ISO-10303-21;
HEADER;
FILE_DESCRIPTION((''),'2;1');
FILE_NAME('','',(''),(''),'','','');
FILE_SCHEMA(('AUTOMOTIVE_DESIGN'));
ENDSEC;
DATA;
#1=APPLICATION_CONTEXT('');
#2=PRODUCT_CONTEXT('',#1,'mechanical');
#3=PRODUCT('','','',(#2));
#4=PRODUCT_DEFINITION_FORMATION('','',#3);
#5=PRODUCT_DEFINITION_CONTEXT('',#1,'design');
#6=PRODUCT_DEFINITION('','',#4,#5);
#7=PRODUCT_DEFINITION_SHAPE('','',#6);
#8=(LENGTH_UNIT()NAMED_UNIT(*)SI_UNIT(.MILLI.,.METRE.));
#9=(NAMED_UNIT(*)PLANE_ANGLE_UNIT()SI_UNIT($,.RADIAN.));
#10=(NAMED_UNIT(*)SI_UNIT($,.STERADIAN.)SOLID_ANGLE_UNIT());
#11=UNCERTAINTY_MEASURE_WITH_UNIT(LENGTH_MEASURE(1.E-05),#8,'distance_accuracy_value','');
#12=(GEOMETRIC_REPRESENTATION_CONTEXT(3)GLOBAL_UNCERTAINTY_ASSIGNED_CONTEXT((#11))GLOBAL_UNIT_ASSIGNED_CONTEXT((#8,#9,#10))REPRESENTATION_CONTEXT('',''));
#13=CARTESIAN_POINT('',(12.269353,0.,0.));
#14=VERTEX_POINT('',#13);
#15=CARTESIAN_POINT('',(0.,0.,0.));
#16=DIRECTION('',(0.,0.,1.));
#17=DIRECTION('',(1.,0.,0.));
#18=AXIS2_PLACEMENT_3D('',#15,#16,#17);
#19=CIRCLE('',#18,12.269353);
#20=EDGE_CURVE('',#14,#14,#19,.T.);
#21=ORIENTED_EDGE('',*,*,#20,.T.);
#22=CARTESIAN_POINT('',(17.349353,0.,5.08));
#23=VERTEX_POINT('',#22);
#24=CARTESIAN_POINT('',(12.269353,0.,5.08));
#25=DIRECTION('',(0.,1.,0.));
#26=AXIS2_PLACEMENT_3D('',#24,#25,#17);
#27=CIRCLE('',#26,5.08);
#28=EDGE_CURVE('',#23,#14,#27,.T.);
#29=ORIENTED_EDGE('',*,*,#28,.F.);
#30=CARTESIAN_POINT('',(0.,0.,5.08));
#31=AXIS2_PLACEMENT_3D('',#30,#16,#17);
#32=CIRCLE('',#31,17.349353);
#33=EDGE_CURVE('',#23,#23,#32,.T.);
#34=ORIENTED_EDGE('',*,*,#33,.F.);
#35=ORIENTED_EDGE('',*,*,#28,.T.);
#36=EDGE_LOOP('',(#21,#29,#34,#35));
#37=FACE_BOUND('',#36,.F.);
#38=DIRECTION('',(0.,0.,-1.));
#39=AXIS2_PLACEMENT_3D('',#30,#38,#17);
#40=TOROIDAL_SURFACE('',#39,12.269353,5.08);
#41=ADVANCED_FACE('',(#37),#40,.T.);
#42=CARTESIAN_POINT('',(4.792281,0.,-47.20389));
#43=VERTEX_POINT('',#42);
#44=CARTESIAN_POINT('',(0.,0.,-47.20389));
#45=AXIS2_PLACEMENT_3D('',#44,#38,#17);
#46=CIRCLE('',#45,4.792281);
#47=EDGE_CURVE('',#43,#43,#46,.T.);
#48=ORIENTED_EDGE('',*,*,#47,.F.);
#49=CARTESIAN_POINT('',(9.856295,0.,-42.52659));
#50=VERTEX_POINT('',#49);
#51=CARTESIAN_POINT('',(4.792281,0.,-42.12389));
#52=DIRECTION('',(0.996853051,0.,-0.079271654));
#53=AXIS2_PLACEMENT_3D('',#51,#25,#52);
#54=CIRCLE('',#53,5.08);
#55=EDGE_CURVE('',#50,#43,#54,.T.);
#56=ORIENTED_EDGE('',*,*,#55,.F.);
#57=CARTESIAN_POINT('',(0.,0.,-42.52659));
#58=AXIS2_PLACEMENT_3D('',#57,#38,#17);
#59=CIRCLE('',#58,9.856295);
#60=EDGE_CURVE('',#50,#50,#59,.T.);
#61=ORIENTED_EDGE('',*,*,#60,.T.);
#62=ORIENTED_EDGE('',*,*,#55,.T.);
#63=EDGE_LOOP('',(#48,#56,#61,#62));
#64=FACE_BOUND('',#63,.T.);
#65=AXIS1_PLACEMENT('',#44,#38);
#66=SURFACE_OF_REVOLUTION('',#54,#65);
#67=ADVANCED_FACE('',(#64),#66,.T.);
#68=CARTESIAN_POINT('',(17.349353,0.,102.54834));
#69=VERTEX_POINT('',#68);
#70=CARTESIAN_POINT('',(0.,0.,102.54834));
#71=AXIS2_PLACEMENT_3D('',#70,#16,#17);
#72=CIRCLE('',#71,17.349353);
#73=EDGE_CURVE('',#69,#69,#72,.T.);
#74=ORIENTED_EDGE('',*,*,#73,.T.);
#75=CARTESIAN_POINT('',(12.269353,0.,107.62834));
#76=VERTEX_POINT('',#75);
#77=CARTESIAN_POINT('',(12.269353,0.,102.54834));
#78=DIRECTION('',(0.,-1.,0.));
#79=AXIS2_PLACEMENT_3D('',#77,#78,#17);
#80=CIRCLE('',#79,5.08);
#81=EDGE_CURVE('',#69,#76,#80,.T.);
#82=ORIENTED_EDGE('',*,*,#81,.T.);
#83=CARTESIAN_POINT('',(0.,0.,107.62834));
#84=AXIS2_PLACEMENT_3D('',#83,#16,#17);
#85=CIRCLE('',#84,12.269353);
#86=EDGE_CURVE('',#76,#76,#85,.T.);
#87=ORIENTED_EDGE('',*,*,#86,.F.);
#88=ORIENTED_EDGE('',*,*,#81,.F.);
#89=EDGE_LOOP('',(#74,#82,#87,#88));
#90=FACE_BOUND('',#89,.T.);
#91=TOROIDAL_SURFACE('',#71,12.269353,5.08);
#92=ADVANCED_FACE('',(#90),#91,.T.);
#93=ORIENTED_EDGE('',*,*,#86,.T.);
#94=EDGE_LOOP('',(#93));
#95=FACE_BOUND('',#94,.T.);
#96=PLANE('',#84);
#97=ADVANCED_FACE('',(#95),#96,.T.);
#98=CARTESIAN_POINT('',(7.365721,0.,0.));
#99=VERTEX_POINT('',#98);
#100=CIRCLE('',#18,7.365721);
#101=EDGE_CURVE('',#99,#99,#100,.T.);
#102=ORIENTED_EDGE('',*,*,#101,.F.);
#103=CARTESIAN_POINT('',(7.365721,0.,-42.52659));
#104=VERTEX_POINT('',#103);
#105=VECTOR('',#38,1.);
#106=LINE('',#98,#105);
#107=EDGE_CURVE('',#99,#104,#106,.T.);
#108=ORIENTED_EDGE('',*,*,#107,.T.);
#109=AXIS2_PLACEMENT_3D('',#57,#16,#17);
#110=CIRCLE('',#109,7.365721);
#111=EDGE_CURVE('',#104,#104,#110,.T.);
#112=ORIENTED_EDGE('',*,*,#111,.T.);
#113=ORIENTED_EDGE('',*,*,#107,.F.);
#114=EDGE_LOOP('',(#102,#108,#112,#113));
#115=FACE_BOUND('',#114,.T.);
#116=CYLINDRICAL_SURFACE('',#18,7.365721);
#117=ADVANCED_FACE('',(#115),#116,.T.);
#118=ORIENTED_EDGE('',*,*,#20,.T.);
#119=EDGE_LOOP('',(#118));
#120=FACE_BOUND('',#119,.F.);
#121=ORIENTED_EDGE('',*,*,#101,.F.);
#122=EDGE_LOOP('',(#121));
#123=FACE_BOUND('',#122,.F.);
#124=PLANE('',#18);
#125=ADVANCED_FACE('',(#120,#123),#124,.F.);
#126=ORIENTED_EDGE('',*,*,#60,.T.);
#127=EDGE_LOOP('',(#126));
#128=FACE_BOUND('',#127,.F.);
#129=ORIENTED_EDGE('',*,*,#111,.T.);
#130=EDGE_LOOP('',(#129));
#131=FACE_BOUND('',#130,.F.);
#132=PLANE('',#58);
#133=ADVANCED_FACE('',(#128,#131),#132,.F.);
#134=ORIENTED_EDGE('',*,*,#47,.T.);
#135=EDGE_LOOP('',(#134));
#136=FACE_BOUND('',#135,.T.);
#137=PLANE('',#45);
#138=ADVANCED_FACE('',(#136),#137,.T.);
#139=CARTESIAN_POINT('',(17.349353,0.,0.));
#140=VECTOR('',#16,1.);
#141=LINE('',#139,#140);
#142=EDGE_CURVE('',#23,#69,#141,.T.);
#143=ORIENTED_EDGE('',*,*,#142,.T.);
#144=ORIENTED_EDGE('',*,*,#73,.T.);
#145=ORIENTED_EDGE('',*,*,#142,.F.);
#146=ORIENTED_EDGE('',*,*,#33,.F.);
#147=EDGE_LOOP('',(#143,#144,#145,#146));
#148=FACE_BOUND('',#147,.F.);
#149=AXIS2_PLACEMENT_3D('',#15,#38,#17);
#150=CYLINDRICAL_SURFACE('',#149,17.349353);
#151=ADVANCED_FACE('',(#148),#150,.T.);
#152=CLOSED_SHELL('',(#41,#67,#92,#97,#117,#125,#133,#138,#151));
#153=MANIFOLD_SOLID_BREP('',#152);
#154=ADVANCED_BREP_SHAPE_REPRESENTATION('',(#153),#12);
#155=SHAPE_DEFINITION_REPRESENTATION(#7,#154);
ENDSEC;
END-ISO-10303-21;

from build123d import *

# Parameters (mm, degrees)
F0_R     = 17.3493533367
F1_DEPTH = 107.62834
F2_R     = 5.08
F3_R     = 5.08
F4_R     = 7.3657213081
F5_DEPTH = 42.52659
F6_R     = 9.8562945963
F7_DEPTH = 4.6773


# Not quite as in the source:
# - a fillet or chamfer that OpenCascade refuses, or shapes differently, is made with other operations: its cross-section is extruded or revolved along the edge and cut away or added


with BuildPart() as f1:
    # F0 (on Top) → F1 (new body)
    with BuildSketch(Plane.XY):
        Circle(F0_R)
    extrude(amount=F1_DEPTH)

    # F2
    f2_edges = [f1.edges().sort_by_distance(p)[0] for p in [
        (-17.349353, 0, 107.62834),
    ]]
    fillet(f2_edges, radius=F2_R)

    # F3
    f3_edges = [f1.edges().sort_by_distance(p)[0] for p in [
        (-17.349353, 0, 0),
    ]]
    fillet(f3_edges, radius=F3_R)

    # F4 (on Top) → F5 (join)
    with BuildSketch(Plane.XY):
        Circle(F4_R)
    extrude(amount=-F5_DEPTH)

    # F6 (on face) → F7 (join)
    with BuildSketch(Plane(origin=(0, 0, -42.52659), x_dir=(1, 0, 0), z_dir=(0, 0, -1))):
        Circle(F6_R)
    extrude(amount=F7_DEPTH)

    # F8: fillet of radius 5.08 on 1 edges, made by hand

    # F8_s1 → F8_t2 (revolve, cut)
    with BuildSketch(Plane.XZ):
        with BuildLine():
            ThreePointArc((9.8562945963, -42.52659), (8.2390682978, -45.8556533901), (4.7922810981, -47.20389))
            Line((4.7922810981, -47.20389), (9.8562945963, -47.20389))
            Line((9.8562945963, -47.20389), (9.8562945963, -42.52659))
        make_face()
    revolve(axis=Axis((0, 0, -47.20389), (0, 0, -1)), mode=Mode.SUBTRACT)


solid = f1.part
